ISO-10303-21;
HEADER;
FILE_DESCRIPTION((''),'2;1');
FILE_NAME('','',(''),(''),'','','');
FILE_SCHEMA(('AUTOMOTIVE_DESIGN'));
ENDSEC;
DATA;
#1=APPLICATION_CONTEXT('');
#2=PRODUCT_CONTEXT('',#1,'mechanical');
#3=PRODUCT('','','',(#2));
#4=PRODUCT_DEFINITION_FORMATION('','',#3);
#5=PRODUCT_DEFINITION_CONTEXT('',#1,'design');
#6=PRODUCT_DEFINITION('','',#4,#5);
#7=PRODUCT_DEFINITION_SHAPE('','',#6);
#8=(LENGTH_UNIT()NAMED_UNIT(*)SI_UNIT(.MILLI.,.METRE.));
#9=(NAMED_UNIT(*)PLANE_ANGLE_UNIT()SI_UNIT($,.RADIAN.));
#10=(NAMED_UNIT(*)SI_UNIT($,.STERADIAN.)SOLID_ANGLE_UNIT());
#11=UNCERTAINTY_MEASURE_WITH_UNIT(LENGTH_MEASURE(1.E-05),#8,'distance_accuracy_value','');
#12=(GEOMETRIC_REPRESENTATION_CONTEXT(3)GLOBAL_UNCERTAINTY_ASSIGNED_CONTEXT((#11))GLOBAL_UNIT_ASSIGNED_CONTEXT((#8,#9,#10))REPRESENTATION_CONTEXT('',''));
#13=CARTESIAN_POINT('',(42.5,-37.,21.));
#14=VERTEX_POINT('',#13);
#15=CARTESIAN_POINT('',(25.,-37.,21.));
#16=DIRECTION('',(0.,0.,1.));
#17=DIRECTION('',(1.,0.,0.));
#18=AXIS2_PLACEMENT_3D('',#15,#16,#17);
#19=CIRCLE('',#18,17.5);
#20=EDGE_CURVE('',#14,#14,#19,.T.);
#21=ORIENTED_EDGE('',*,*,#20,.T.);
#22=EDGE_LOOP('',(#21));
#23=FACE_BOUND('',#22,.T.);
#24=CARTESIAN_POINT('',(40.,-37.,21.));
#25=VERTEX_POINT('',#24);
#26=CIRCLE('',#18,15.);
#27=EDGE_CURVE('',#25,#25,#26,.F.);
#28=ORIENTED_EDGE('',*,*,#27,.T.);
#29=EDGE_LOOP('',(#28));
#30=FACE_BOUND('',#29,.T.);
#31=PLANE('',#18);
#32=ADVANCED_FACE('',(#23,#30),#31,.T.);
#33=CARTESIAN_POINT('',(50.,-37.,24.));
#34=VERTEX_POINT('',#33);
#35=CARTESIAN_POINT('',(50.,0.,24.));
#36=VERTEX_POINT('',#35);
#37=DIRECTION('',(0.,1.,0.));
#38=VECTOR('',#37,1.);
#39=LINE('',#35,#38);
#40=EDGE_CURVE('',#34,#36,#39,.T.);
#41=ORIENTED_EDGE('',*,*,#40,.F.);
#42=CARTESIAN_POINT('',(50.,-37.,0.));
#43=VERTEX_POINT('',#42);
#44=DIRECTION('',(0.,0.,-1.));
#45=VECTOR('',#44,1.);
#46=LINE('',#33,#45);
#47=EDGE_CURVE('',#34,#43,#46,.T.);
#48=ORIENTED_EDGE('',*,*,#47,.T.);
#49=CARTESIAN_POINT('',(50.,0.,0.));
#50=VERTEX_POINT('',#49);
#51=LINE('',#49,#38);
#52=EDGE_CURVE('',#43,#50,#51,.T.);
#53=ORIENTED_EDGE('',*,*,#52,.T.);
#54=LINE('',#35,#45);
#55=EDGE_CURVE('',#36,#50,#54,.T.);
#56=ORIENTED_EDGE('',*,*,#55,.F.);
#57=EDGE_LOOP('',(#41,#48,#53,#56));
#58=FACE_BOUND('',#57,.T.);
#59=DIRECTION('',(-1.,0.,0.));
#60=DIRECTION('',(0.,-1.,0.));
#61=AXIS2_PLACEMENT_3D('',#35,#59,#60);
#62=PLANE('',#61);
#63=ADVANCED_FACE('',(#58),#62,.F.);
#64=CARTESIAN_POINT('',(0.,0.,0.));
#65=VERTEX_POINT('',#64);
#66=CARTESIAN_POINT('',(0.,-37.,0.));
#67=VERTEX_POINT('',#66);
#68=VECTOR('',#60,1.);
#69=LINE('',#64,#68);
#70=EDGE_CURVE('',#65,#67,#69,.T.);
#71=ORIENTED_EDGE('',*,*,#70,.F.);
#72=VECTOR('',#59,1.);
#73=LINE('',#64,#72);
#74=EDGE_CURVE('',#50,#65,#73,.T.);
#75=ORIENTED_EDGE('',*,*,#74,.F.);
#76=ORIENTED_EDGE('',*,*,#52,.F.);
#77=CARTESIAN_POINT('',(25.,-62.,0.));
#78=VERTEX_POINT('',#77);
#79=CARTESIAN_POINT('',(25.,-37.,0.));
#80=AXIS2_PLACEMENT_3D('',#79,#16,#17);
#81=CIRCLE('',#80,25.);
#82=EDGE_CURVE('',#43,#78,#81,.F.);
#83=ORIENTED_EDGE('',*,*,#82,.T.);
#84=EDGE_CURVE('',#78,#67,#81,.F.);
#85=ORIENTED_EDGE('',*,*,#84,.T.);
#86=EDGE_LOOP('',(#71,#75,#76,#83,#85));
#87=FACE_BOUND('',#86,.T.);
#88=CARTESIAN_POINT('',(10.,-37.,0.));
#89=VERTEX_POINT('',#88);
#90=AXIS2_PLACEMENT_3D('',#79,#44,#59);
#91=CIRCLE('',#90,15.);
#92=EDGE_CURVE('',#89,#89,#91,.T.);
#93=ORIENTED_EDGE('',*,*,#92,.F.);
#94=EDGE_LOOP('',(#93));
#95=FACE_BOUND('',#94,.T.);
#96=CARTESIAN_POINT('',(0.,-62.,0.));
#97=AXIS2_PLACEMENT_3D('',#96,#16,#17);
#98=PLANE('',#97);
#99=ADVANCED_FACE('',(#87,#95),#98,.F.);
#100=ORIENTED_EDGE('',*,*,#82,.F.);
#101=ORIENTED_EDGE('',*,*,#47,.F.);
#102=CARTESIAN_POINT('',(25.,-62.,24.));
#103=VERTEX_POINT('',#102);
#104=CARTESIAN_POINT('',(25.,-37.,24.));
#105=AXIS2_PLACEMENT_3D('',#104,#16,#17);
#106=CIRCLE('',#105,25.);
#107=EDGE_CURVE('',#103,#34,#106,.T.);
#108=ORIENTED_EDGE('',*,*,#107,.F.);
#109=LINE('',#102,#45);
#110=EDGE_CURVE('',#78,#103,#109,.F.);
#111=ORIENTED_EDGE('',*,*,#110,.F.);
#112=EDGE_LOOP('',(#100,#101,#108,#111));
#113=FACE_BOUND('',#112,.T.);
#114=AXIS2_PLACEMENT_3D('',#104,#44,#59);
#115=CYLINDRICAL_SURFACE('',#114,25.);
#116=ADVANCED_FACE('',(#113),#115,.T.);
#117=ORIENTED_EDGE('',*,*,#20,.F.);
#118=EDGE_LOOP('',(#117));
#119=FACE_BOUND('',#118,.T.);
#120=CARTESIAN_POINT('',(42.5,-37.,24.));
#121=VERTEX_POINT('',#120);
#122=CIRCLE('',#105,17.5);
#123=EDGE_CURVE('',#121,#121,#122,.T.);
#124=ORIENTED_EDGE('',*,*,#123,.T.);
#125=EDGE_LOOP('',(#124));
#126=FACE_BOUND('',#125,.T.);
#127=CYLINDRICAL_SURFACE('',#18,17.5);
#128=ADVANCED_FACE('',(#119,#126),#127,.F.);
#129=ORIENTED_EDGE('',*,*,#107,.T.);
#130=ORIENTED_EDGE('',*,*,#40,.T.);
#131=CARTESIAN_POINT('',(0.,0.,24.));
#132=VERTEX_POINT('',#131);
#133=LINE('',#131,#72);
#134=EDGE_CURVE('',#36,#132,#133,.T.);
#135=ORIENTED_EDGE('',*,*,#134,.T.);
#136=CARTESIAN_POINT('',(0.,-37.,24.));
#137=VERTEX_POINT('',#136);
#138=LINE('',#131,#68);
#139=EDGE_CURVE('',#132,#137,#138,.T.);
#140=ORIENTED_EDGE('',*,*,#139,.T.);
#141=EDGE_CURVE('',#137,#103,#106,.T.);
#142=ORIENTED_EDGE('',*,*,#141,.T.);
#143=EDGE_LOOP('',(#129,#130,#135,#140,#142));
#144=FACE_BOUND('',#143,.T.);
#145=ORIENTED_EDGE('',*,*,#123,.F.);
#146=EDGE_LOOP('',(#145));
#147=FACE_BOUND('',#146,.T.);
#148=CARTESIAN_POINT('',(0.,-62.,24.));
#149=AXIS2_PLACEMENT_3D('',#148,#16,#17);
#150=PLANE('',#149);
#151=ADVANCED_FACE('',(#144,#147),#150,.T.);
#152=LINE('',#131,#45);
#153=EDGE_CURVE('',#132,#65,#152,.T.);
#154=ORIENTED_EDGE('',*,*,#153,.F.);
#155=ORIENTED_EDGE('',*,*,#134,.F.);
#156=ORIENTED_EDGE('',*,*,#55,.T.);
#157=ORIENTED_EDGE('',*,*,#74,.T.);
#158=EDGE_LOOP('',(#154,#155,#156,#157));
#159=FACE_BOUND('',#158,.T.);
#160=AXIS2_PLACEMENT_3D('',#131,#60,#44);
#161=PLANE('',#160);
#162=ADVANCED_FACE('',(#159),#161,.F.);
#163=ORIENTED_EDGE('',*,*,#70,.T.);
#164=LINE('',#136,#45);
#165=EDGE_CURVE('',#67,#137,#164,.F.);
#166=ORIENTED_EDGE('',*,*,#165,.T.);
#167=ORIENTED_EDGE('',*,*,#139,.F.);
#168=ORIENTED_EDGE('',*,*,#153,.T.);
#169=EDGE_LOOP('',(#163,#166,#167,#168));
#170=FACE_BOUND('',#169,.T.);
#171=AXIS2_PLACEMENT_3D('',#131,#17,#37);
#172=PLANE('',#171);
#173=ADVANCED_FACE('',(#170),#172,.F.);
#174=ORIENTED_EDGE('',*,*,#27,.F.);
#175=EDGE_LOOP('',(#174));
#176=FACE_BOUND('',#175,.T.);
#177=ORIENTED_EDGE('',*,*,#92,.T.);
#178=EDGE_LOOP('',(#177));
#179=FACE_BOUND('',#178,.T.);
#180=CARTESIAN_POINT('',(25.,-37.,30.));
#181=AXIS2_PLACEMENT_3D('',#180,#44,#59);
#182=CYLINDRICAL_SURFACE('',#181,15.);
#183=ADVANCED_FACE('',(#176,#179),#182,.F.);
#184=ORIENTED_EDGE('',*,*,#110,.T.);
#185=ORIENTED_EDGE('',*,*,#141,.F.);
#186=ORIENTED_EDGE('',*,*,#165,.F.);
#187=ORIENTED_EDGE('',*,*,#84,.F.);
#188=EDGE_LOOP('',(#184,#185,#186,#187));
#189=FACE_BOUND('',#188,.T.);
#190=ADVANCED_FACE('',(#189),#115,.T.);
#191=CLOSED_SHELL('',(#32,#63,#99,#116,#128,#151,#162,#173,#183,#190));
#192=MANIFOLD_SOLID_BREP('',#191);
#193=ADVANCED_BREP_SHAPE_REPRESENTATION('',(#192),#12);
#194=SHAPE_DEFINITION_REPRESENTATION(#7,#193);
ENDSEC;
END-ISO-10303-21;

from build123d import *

# Parameters (mm, degrees)
SKETCH_1_W          = 50
SKETCH_1_H          = 62
EXTRUDE_1_DEPTH     = 24
FILLET_1_R          = 25
SKETCH_2_R          = 15
CUT_EXTRUDE_1_DEPTH = 30
SKETCH_3_R          = 17.5
CUT_EXTRUDE_2_DEPTH = 3


with BuildPart() as part:
    # 草图1 → 拉伸1 (new body)
    with BuildSketch(Plane.XY):
        with Locations((25, -31)):
            Rectangle(SKETCH_1_W, SKETCH_1_H)
    extrude(amount=EXTRUDE_1_DEPTH)

    # 圆角1
    fillet_1_edges = [part.edges().sort_by_distance(p)[0] for p in [
        (0, -62, 12),
        (50, -62, 12),
    ]]
    fillet(fillet_1_edges, radius=FILLET_1_R - 0.0001)  # a hair under: the kernel refuses the full size

    # 草图2 → 切除-拉伸1 (cut)
    with BuildSketch(Plane(origin=(0, 0, 0), x_dir=(-1, 0, 0), z_dir=(0, 0, -1))):
        with Locations((-25, -37)):
            Circle(SKETCH_2_R)
    extrude(amount=-CUT_EXTRUDE_1_DEPTH, mode=Mode.SUBTRACT)

    # 草图3 → 切除-拉伸2 (cut)
    with BuildSketch(Plane.XY.offset(24)):
        with Locations((25, -37)):
            Circle(SKETCH_3_R)
    extrude(amount=-CUT_EXTRUDE_2_DEPTH, mode=Mode.SUBTRACT)


solid = part.part
